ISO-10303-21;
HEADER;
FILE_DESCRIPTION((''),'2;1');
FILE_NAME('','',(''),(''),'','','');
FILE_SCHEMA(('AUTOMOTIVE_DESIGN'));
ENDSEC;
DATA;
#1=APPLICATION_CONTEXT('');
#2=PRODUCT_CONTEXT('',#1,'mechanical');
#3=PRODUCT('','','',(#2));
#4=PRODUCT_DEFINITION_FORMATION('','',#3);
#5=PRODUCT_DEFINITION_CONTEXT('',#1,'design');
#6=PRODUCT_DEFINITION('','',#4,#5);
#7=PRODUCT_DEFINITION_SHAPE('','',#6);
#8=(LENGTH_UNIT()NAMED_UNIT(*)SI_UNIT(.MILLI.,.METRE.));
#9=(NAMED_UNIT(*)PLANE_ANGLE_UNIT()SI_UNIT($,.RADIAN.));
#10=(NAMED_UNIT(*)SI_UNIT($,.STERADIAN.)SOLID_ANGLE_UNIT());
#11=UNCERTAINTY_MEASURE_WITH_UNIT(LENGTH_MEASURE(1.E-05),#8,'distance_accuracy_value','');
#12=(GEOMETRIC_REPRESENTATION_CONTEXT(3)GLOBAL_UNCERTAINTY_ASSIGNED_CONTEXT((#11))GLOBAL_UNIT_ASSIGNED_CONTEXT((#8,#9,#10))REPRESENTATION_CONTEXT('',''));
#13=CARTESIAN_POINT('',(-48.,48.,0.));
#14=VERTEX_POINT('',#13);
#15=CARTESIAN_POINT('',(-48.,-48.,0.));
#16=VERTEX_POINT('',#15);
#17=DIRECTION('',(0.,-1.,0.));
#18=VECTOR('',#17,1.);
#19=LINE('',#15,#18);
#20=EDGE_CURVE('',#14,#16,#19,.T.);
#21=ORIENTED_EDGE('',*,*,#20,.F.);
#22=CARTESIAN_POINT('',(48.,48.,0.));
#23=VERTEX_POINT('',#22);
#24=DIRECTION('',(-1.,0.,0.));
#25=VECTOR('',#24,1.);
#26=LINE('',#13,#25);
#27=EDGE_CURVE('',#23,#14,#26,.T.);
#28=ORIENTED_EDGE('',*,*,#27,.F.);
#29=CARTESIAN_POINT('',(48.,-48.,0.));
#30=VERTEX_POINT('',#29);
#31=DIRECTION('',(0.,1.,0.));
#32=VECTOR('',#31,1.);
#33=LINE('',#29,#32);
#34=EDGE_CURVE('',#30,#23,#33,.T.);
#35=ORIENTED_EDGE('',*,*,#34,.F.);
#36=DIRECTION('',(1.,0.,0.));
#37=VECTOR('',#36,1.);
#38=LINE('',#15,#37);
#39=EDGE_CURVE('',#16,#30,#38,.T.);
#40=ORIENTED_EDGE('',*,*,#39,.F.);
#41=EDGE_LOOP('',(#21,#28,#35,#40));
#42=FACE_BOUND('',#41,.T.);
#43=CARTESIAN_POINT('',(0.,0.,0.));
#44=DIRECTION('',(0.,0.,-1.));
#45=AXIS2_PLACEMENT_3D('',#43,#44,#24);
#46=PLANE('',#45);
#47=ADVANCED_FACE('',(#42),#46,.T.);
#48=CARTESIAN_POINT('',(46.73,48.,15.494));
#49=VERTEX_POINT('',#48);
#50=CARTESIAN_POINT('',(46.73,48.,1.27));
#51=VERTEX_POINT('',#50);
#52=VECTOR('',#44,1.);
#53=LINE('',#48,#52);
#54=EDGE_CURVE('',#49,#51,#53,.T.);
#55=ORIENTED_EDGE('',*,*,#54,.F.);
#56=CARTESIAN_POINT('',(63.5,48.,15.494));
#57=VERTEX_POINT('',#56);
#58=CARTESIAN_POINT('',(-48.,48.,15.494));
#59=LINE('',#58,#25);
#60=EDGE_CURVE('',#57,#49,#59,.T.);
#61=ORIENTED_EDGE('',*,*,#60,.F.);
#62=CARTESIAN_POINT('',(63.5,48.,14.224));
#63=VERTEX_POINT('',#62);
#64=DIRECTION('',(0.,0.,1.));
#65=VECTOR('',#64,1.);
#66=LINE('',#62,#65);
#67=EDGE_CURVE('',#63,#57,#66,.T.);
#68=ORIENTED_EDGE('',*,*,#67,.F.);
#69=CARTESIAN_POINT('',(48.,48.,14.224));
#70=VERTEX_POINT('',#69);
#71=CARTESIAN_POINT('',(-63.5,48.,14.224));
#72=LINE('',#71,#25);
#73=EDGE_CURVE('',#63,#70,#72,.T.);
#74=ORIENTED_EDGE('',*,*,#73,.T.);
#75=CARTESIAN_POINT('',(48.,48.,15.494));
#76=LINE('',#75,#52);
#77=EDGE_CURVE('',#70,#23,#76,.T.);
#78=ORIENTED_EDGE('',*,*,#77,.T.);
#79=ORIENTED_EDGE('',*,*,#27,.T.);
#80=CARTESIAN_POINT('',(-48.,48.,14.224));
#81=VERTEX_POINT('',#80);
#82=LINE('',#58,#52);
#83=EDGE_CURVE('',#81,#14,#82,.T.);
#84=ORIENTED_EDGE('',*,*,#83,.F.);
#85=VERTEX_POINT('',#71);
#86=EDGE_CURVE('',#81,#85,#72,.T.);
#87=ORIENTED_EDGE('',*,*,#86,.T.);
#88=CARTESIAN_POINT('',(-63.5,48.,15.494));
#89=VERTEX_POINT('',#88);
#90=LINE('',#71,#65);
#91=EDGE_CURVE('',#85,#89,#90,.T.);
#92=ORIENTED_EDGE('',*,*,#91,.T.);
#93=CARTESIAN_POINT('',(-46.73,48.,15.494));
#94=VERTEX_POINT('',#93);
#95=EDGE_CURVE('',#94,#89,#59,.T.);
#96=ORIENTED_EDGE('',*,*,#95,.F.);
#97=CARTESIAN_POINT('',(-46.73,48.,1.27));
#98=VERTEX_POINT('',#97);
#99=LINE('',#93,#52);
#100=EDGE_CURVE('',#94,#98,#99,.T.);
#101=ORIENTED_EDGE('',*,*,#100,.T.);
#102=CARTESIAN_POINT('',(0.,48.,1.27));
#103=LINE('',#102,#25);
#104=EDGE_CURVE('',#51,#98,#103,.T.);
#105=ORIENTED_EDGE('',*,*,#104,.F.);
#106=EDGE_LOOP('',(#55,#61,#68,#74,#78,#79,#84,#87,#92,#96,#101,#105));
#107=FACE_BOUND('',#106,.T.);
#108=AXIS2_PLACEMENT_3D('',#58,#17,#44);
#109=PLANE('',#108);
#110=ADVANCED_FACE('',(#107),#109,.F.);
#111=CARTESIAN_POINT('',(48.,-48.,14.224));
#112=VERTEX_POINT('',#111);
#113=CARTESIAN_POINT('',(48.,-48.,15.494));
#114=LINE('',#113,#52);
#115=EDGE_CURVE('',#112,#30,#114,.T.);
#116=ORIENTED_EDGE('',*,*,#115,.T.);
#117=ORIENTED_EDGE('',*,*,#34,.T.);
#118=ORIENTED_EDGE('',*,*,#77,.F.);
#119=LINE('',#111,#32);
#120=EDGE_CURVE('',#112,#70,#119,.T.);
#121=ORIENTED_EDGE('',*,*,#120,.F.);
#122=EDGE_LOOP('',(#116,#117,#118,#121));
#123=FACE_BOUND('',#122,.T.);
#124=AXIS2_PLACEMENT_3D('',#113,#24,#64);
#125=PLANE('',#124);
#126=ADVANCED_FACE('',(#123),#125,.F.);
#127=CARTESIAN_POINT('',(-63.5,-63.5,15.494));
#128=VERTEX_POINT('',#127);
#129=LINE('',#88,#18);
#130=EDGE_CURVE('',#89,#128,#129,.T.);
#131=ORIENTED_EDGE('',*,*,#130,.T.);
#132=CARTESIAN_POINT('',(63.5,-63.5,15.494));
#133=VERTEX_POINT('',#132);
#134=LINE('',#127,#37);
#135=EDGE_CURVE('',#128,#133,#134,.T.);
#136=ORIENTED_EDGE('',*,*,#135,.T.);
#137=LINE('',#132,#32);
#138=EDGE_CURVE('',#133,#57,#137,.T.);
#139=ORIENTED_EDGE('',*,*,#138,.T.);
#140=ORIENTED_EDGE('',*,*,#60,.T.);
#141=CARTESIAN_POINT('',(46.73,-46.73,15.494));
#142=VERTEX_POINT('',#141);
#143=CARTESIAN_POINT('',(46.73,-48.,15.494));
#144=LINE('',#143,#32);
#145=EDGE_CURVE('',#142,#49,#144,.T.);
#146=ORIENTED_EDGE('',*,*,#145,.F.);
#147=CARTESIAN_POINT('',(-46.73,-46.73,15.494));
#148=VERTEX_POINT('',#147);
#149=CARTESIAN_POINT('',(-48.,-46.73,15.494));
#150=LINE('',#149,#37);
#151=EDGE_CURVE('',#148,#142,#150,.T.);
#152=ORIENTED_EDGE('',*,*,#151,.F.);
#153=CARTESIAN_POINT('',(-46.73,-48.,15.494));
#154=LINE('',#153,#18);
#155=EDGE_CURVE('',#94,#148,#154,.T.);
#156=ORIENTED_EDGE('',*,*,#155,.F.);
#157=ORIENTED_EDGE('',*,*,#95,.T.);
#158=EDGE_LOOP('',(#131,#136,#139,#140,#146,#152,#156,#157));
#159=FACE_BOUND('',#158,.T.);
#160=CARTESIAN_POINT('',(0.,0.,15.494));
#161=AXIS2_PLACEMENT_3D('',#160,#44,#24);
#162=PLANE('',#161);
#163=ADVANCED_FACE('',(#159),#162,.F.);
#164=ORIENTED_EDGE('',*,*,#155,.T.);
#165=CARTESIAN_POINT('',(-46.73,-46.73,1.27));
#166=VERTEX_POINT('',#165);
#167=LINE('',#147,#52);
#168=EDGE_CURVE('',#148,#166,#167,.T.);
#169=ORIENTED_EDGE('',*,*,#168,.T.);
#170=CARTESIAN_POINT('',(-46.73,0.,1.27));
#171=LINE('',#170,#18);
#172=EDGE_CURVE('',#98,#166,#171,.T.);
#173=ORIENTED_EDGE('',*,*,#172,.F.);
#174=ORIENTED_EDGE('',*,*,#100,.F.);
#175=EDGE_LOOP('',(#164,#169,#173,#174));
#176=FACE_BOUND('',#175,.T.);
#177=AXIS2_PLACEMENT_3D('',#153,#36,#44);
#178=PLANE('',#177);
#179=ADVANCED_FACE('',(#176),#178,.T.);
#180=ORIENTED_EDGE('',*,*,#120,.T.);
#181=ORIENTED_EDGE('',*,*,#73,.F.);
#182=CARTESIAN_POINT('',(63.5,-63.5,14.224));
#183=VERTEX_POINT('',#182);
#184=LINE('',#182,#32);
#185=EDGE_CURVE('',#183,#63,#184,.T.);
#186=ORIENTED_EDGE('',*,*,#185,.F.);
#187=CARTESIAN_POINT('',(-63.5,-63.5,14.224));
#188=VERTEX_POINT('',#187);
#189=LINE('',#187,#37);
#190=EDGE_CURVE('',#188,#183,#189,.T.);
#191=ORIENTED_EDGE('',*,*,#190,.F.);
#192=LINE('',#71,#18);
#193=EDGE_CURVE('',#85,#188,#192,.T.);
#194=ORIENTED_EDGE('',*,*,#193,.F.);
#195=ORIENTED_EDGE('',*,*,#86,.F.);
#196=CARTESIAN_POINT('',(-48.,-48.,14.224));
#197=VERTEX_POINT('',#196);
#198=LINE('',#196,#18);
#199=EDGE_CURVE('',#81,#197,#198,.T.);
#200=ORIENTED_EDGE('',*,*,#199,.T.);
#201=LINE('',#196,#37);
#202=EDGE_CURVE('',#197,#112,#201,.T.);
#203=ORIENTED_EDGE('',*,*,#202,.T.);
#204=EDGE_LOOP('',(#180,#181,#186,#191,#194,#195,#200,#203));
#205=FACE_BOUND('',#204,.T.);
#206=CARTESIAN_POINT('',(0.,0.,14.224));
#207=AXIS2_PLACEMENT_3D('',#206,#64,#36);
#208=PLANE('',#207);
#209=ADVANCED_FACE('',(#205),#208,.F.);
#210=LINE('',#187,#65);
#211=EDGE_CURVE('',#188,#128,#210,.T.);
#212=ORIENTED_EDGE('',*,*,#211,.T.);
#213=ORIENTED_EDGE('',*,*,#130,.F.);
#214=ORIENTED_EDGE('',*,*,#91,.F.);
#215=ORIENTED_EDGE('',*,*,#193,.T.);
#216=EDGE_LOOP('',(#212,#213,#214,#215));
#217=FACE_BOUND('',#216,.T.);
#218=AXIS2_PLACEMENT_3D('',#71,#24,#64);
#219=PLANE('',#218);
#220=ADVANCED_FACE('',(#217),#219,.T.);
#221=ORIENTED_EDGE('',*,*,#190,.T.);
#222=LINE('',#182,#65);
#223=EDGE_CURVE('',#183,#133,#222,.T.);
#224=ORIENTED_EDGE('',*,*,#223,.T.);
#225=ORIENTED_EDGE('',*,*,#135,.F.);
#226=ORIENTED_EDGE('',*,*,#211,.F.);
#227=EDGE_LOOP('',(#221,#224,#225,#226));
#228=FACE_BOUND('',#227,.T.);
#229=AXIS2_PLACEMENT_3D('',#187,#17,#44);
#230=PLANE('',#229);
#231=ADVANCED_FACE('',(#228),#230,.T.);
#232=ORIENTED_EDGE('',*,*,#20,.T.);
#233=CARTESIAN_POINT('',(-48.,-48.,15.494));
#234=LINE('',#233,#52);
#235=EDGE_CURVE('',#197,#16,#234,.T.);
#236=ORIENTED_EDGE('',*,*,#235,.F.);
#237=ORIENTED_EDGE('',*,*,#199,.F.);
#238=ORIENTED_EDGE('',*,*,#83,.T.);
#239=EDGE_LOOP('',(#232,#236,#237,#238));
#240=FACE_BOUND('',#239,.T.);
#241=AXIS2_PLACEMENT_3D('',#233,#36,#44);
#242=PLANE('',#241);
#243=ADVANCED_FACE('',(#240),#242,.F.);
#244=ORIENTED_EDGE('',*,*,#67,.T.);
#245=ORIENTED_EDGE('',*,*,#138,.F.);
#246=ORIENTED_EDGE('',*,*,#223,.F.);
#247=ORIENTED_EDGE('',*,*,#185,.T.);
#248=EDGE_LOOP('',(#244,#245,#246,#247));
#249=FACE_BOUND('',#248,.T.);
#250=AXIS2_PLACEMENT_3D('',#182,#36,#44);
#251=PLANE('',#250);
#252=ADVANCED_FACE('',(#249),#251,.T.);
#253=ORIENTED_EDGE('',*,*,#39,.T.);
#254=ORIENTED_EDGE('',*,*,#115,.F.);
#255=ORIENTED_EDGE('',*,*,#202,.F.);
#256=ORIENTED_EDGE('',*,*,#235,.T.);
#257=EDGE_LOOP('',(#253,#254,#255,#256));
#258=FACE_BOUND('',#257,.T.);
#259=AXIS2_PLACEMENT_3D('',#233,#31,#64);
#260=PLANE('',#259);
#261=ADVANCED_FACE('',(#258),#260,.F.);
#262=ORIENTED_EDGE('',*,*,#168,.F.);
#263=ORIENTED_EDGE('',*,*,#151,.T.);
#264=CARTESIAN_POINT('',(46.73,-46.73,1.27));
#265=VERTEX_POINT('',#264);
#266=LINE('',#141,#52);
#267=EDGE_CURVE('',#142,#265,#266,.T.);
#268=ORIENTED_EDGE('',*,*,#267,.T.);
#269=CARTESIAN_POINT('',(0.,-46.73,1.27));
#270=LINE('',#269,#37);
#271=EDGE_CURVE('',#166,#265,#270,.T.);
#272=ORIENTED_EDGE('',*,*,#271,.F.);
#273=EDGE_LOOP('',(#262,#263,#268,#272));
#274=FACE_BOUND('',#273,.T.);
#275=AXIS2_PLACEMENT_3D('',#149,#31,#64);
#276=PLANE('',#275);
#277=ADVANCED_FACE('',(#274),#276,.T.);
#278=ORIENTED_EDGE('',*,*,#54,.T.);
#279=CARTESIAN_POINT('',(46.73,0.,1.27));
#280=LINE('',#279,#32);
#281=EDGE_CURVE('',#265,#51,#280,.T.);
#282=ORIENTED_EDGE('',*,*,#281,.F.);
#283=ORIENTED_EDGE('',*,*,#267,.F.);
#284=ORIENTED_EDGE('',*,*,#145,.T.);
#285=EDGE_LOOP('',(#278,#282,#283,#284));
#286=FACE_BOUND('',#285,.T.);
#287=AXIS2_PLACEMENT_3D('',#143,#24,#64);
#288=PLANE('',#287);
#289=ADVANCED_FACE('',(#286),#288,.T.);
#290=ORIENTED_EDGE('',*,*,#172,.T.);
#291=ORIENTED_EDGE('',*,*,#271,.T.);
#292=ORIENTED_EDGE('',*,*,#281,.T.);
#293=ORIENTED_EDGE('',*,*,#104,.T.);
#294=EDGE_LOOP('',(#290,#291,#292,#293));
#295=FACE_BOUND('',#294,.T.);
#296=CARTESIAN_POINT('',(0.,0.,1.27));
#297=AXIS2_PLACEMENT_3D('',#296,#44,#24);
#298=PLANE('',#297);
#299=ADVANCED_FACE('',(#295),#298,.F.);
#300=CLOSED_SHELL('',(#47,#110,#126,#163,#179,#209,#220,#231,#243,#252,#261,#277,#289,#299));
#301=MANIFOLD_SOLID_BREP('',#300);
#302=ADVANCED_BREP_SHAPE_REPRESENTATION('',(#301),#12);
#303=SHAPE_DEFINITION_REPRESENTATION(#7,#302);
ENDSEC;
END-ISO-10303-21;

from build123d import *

# Parameters (mm, degrees)
SKETCH1_W           = 96
SKETCH1_H           = 96
BOSS_EXTRUDE1_DEPTH = 15.494
SKETCH2_W           = 127
SKETCH2_H           = 111.5
BOSS_EXTRUDE2_DEPTH = 1.27
SHELL1_START        = -46.73
SHELL1_OUTLINE_W    = 94.73
SHELL1_OUTLINE_H    = 14.224
SHELL1_DEPTH        = 93.46


# Read off the part's stored shape, not the designer's step: Shell1
with BuildPart() as part:
    # Sketch1 → Boss-Extrude1 (new body)
    with BuildSketch(Plane.XY):
        Rectangle(SKETCH1_W, SKETCH1_H)
    extrude(amount=BOSS_EXTRUDE1_DEPTH)

    # Sketch2 → Boss-Extrude2 (add)
    with BuildSketch(Plane.XY.offset(15.494)):
        with Locations((0, -7.75)):
            Rectangle(SKETCH2_W, SKETCH2_H)
    extrude(amount=-BOSS_EXTRUDE2_DEPTH)

    # Shell1 outline → Shell1 (cut)
    with BuildSketch(Plane.YZ.offset(SHELL1_START)):
        with Locations((0.635, 8.382)):
            Rectangle(SHELL1_OUTLINE_W, SHELL1_OUTLINE_H)
    extrude(amount=SHELL1_DEPTH, mode=Mode.SUBTRACT)


solid = part.part
